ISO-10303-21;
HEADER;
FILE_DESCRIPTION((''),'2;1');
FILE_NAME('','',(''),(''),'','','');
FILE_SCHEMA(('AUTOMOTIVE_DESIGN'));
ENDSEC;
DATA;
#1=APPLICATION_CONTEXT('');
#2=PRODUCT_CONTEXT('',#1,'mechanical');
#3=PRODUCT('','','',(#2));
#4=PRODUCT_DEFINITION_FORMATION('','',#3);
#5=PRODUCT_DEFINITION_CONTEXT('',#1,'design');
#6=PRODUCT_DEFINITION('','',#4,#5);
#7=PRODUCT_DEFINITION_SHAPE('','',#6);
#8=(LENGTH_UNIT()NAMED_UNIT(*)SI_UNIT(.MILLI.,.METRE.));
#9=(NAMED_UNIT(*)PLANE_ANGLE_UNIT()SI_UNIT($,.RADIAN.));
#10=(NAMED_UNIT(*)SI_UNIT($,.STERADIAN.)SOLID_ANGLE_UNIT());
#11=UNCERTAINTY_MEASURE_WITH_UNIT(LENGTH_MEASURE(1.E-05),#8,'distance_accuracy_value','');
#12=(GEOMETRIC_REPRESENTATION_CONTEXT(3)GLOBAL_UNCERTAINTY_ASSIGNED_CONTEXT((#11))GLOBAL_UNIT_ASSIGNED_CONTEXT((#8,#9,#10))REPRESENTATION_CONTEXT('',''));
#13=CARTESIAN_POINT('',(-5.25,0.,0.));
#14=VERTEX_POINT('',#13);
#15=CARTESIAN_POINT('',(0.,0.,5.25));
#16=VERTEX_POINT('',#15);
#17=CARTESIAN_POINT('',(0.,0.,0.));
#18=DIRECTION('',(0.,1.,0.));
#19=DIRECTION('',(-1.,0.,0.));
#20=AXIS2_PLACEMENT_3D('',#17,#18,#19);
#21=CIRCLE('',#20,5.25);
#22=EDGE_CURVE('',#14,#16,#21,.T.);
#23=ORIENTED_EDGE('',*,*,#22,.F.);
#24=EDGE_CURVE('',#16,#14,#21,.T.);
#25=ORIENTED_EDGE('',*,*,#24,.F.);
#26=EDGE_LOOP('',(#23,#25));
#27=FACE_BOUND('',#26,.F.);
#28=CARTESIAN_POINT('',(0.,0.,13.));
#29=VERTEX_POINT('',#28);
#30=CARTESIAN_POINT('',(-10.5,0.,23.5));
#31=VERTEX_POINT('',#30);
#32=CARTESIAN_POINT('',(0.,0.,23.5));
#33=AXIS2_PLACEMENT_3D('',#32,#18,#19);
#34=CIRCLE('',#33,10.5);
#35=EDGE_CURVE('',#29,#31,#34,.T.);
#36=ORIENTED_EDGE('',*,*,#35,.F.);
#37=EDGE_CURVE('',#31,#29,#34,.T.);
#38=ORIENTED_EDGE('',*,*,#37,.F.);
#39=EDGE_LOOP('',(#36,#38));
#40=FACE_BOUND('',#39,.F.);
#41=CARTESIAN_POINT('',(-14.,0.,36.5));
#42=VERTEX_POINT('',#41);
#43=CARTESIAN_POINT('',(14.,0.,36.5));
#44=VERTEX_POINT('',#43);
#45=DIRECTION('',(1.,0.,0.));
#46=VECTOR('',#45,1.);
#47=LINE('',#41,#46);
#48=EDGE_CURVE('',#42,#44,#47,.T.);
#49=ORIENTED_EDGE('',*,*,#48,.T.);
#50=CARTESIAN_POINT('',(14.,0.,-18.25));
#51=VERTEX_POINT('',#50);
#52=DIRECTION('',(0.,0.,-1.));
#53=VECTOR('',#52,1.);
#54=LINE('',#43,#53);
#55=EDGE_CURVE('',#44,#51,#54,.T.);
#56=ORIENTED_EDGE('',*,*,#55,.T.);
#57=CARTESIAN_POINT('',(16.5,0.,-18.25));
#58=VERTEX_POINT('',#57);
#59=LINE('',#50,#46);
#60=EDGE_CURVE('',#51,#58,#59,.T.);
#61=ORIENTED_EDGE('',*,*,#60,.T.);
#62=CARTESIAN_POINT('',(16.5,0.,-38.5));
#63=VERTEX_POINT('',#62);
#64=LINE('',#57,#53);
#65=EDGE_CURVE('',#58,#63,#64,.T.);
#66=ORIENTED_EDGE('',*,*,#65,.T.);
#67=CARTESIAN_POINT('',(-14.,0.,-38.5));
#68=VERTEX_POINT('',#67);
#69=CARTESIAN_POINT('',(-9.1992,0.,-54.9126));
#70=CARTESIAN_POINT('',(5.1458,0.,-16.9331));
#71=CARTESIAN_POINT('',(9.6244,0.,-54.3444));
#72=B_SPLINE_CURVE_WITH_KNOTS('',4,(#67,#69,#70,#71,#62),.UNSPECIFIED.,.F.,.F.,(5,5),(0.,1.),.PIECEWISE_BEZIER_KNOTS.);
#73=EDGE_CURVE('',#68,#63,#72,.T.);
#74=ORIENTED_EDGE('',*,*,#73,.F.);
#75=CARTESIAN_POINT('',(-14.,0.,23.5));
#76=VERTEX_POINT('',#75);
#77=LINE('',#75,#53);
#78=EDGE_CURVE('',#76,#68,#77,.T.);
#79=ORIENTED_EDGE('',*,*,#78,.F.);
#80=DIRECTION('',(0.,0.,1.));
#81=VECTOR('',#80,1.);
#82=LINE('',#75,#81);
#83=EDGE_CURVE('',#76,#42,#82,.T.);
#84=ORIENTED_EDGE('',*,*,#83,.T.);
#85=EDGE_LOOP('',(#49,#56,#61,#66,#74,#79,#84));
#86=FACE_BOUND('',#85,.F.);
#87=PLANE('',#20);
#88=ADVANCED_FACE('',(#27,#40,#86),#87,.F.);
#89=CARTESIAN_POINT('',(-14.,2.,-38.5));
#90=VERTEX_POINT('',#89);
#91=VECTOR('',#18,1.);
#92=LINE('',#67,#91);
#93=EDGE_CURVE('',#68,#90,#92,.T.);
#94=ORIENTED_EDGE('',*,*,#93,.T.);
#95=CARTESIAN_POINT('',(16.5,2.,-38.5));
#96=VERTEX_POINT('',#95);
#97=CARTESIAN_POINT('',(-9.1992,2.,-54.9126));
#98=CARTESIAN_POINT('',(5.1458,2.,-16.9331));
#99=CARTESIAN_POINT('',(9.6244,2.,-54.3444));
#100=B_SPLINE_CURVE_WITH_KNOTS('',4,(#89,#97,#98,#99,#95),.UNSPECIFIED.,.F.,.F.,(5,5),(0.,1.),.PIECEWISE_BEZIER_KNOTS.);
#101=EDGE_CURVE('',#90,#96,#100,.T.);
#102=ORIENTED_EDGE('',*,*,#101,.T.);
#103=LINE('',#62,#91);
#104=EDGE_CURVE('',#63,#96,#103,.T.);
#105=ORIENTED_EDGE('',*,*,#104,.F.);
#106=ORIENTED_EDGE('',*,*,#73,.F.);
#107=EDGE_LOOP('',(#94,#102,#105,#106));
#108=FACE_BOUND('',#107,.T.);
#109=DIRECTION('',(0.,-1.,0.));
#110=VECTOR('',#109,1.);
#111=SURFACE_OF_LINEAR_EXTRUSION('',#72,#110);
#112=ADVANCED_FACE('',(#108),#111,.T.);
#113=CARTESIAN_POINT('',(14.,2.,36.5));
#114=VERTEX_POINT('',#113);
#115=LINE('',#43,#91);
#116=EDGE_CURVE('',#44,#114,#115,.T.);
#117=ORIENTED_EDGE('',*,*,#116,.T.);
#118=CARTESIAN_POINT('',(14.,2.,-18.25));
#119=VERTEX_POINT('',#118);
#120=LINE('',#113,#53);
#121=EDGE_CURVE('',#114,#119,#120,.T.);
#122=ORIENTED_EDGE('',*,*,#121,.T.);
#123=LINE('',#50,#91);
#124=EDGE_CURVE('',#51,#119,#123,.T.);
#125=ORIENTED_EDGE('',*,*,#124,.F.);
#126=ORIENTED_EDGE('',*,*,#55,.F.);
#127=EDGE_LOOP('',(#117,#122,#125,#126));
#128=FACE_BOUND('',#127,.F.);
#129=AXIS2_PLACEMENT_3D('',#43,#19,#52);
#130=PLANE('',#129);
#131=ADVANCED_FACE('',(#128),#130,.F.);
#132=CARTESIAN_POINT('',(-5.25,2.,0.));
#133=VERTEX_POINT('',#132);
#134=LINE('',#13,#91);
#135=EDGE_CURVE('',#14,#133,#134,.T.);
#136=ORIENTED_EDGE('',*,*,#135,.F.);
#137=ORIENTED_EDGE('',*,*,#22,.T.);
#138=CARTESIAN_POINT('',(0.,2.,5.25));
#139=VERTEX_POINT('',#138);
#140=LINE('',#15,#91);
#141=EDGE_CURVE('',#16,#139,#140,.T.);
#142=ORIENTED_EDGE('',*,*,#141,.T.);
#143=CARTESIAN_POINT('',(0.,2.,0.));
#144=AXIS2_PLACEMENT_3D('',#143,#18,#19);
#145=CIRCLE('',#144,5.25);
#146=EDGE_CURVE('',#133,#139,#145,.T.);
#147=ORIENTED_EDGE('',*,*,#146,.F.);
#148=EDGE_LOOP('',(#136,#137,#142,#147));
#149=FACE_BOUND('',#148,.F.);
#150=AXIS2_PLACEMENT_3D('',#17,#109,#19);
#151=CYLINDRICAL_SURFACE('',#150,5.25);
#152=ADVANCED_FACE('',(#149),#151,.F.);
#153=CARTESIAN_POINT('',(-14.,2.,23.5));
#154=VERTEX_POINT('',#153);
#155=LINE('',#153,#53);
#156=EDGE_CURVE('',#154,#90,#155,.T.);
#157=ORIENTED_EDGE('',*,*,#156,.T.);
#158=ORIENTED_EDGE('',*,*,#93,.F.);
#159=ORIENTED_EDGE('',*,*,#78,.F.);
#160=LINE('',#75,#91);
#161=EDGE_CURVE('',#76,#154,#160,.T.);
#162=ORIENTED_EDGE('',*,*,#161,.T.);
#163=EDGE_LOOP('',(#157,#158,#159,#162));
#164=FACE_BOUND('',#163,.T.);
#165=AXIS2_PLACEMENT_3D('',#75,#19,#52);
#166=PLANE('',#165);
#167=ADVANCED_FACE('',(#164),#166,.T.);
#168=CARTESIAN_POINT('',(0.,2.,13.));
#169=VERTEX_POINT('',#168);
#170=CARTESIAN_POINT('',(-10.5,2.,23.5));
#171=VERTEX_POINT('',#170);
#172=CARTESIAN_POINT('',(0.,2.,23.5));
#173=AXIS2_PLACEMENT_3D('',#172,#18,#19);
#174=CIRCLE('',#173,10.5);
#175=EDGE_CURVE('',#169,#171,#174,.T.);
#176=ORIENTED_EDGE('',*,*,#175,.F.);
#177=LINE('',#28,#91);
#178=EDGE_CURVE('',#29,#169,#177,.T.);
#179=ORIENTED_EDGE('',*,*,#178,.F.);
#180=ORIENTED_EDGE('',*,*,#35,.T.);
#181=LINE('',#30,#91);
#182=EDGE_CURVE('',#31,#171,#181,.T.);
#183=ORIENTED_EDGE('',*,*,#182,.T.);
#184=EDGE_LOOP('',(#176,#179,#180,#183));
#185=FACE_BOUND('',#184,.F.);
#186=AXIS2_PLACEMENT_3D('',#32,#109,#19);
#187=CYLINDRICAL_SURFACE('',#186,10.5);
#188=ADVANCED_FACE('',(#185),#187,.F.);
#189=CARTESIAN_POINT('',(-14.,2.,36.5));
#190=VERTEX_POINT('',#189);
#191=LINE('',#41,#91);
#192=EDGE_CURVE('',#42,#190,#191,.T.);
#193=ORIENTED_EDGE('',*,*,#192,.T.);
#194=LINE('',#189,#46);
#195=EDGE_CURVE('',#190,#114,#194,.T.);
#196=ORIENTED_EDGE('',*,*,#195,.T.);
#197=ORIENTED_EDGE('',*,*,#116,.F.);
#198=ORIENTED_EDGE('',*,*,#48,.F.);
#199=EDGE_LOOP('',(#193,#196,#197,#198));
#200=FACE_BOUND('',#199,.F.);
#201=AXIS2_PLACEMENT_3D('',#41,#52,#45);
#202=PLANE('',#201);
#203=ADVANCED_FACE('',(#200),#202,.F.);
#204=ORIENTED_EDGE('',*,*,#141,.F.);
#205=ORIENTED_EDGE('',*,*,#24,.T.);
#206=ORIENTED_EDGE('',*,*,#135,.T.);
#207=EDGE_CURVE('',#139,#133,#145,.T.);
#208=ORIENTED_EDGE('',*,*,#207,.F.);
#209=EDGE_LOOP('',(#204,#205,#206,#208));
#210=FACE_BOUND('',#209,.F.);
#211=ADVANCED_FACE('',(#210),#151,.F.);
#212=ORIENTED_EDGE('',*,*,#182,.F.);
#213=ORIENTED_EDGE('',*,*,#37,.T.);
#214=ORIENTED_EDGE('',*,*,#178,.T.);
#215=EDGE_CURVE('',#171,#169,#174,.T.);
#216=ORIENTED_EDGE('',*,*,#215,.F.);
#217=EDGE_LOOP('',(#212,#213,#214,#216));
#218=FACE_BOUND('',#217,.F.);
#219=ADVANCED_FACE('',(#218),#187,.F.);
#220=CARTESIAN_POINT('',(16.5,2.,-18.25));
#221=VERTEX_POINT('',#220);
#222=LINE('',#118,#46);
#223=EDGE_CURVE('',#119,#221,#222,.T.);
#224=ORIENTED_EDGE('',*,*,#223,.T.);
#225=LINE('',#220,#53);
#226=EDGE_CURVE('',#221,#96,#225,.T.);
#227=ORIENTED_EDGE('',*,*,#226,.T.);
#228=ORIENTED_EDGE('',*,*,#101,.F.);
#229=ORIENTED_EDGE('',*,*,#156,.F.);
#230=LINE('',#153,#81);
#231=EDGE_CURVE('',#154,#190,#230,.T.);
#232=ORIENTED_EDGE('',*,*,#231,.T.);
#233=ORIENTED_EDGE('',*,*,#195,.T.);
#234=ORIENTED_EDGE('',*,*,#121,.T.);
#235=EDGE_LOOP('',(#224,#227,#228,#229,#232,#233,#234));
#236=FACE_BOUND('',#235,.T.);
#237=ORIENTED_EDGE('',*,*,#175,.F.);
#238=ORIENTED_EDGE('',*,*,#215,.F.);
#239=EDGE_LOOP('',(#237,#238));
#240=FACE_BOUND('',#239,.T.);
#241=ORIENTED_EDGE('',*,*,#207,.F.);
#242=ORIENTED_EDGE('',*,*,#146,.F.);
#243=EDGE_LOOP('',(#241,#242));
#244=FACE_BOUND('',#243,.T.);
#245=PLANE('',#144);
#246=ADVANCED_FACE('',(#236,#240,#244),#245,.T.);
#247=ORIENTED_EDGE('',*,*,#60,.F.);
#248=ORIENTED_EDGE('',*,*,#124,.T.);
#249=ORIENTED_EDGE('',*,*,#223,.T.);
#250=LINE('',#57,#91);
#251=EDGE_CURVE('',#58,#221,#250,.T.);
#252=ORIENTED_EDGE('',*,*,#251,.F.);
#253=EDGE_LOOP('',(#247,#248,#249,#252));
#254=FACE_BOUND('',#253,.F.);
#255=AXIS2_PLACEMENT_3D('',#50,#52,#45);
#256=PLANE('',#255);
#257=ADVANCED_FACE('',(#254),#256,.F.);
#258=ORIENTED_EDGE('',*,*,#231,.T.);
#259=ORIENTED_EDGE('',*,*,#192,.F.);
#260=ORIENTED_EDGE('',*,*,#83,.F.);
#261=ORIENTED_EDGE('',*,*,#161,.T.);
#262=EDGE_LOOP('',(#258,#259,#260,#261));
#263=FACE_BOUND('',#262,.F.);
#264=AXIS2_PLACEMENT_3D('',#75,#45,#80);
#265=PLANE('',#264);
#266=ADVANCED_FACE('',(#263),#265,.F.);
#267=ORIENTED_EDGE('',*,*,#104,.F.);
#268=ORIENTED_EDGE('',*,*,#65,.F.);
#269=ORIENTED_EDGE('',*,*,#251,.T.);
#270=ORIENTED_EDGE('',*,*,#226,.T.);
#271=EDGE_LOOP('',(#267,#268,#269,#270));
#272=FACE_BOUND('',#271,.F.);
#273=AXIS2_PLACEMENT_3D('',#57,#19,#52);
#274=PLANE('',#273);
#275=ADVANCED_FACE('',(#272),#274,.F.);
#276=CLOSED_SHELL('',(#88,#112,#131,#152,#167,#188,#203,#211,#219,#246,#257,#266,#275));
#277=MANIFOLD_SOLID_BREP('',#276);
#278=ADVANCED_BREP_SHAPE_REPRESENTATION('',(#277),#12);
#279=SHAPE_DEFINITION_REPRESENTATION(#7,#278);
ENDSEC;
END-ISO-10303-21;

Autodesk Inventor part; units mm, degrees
ref_plane "YZ Plane" through (0, 0, 0) normal (1, 0, 0) x (0, 1, 0)
ref_plane "XZ Plane" through (0, 0, 0) normal (0, 1, 0) x (-1, 0, 0)
ref_plane "XY Plane" through (0, 0, 0) normal (0, 0, 1) x (1, 0, 0)
sketch "Sketch1" plane through (0, 0, 0) normal (0, 1, 0) x (-1, 0, 0)
  circle A0 centre (0, 0) radius 5.25
  line L0 (0, 0) -> (0, 23.5)
  circle A1 centre (0, 23.5) radius 10.5
  line L1 (0, 23.5) -> (14, 23.5)
  line L2 (14, 23.5) -> (14, 36.5)
  line L3 (14, 36.5) -> (-14, 36.5)
  line L4 (-14, 36.5) -> (-14, -18.25)
  line L5 (-14, -18.25) -> (-16.5, -18.25)
  line L6 (-16.5, -18.25) -> (-16.5, -38.5)
  line L7 (14, 23.5) -> (14, -38.5)
  spline S0 degree 4 poles (14, -38.5) (9.1992, -54.9126) (-5.1458, -16.9331) (-9.6244, -54.3444) (-16.5, -38.5) knots 0 0 0 0 0 1 1 1 1 1
  point P0 (7, -41.75)
  point P1 (-3, -38.5)
  point P2 (-10.5, -41.75)
  dimension "d0" = 10.5
  dimension "d2" = 23.5
  dimension "d3" = 21
  dimension "d4" = 14
  dimension "d5" = 13
  dimension "d6" = 28
  dimension "d7" = 54.75
  dimension "d8" = 2.5
  dimension "d9" = 20.25
  dimension "d10" = 62
extrude "Extrusion1" add sketch "Sketch1" along normal blind 2
properties part number "Tira"
